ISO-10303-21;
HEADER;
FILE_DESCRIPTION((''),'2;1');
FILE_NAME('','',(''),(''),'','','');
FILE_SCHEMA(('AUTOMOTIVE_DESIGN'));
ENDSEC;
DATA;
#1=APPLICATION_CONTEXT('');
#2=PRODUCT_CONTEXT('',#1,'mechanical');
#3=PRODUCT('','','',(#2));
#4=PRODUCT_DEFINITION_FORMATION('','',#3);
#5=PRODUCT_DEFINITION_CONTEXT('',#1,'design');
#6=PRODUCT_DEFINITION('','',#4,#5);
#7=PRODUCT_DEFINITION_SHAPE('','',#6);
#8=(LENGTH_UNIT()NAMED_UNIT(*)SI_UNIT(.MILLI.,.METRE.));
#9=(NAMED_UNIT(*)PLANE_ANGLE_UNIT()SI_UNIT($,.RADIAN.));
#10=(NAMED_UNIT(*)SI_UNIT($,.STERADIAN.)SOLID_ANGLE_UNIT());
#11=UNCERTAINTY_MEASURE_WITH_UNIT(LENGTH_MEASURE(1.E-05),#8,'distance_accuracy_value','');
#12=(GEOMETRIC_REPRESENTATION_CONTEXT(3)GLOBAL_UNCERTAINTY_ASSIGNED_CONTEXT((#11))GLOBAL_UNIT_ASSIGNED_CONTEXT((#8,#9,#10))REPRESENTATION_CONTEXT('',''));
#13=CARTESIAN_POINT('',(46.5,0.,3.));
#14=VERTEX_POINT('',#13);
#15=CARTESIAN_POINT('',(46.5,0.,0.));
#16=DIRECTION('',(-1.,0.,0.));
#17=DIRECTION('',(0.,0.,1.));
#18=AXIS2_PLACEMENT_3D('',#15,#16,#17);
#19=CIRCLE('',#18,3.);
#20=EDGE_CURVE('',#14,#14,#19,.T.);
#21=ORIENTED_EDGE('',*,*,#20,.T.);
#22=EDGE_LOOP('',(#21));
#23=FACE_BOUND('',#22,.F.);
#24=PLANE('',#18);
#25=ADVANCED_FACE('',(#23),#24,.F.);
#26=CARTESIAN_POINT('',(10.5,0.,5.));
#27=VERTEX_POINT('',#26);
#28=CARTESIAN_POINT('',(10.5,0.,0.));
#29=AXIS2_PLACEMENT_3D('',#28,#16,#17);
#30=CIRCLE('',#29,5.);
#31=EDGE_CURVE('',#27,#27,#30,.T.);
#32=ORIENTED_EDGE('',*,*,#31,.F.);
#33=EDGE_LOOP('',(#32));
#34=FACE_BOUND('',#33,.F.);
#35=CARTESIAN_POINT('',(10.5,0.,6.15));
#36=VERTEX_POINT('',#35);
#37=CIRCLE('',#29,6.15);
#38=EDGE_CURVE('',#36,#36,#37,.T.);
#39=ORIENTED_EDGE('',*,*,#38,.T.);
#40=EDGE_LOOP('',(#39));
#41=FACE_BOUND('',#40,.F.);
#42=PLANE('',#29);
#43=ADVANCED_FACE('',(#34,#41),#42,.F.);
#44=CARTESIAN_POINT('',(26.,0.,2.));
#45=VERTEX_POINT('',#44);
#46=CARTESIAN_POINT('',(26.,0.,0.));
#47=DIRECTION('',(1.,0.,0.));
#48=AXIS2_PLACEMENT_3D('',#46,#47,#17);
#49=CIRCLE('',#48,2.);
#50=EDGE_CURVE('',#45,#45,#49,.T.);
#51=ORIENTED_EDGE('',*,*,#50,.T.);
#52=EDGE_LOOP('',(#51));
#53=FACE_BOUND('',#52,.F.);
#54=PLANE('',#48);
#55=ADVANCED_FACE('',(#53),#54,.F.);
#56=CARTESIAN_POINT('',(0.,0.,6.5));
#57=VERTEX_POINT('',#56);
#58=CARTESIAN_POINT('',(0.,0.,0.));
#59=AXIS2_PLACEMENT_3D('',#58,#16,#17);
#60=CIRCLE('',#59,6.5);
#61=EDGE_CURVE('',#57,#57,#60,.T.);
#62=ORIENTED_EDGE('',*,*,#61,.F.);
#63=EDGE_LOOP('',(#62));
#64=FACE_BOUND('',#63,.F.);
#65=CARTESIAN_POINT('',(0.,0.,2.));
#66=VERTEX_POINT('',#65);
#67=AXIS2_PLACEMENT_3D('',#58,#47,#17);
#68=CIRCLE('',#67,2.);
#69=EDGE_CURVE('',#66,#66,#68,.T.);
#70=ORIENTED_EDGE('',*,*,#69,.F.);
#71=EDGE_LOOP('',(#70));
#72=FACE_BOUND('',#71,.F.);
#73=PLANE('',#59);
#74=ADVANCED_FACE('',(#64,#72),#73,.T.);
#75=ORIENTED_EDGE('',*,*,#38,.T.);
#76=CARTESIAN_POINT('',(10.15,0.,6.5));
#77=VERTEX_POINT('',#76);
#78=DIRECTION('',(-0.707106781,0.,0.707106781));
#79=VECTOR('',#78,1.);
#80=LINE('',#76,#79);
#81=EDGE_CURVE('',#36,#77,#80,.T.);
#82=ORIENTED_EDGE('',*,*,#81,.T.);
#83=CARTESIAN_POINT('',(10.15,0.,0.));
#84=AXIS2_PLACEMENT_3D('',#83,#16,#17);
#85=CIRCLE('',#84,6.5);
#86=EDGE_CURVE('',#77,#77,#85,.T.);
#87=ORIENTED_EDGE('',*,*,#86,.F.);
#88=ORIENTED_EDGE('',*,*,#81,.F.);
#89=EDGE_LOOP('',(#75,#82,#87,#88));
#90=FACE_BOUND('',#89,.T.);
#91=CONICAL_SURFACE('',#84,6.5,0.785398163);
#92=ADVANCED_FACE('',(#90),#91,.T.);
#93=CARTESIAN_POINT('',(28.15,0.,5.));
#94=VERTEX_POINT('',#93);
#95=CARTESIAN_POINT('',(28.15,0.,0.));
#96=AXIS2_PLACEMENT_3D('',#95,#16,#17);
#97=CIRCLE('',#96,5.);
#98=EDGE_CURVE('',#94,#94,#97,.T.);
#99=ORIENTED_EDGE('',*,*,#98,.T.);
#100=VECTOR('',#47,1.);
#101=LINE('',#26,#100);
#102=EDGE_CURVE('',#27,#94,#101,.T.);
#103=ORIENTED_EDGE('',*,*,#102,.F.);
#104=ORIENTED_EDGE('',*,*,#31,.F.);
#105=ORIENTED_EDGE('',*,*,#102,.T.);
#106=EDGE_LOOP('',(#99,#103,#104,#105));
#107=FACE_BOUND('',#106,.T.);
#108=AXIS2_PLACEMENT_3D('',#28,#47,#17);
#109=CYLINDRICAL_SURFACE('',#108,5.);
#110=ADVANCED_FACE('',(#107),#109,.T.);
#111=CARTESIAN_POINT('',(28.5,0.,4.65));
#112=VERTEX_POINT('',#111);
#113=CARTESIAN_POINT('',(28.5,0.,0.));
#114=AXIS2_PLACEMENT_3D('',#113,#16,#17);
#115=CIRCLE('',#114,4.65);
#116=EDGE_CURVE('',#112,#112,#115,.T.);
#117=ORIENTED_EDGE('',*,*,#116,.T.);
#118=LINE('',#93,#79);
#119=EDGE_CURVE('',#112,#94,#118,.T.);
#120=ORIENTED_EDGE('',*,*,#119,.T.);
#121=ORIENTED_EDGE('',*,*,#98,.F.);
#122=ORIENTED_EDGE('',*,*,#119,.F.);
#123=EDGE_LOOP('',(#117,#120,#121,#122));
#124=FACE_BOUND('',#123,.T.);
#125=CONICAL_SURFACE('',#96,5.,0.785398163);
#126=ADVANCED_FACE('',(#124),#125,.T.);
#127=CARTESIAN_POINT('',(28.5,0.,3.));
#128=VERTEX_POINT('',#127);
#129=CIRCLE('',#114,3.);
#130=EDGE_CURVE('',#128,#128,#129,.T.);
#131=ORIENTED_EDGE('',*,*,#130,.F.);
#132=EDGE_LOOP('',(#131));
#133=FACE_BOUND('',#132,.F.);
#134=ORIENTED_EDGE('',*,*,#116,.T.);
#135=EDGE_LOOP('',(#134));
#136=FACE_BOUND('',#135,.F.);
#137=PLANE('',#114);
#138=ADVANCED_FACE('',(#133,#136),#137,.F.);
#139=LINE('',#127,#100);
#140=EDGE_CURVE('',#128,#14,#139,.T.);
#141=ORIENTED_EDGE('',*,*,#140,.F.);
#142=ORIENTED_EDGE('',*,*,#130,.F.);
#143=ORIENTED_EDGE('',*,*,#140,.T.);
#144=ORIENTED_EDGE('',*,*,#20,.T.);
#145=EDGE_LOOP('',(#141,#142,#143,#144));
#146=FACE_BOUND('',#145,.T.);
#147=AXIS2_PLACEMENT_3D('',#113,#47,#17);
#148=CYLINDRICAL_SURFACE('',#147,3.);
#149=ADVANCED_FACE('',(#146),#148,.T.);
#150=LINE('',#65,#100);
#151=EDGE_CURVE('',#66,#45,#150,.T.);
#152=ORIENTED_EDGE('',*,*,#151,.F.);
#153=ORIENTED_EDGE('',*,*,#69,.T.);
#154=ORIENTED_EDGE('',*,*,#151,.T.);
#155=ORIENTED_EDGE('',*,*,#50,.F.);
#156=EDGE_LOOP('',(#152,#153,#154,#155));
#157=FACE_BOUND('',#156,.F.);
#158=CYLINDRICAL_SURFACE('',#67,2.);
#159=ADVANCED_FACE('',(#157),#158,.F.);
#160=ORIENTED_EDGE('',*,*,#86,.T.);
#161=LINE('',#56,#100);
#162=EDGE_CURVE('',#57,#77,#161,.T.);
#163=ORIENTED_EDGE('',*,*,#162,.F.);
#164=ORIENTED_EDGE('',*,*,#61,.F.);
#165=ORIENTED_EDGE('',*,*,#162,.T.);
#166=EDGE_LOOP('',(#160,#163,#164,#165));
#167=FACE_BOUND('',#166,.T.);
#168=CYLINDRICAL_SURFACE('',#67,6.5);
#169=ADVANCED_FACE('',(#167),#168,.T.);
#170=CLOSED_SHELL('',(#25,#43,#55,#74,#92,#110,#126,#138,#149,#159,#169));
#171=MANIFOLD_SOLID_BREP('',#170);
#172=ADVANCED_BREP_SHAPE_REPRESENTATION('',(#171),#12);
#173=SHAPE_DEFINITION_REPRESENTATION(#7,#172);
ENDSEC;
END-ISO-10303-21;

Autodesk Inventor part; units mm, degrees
ref_plane "YZ Plane" through (0, 0, 0) normal (1, 0, 0) x (0, 1, 0)
ref_plane "XZ Plane" through (0, 0, 0) normal (0, 1, 0) x (-1, 0, 0)
ref_plane "XY Plane" through (0, 0, 0) normal (0, 0, 1) x (1, 0, 0)
sketch "Skizze1" plane through (0, 0, 0) normal (0, 1, 0) x (-1, 0, 0)
  line L0 (0, 0) -> (0, 6.5)
  line L1 (0, 6.5) -> (-10.5, 6.5)
  line L2 (-10.5, 6.5) -> (-10.5, 5)
  line L3 (-10.5, 5) -> (-28.5, 5)
  line L4 (-28.5, 5) -> (-28.5, 3)
  line L5 (-28.5, 3) -> (-46.5, 3)
  line L6 (-46.5, 3) -> (-46.5, 0)
  line L7 (-46.5, 0) -> (0, 0)
  dimension "d0" = 46.5
  dimension "d1" = 13
  dimension "d2" = 10
  dimension "d3" = 6
  dimension "d4" = 10.5
  dimension "d5" = 18
revolve "Umdrehung1" add sketch "Skizze1" angle 360 about axis through (46.5, 0, 0) along (-1, 0, 0)
thread "Gewinde1" size "M6x1" class "6g" standard "ISO Metric profile" length 11
sketch "Skizze2" plane through (0, 0, 0) normal (-1, 0, 0) x (0, 0, 1)
  circle A0 centre (0, 0) radius 6.5 projected
  point P0 (0, 0)
hole "Bohrung1" at (0, 0, 0) direction (1, 0, 0) diameter 4 depth 26
chamfer "Fasen1" distance 0.35 angle 45 2 edges at (28.5, 0, -5) (10.5, 0, -6.5)
properties part number "102" material "Silber"
